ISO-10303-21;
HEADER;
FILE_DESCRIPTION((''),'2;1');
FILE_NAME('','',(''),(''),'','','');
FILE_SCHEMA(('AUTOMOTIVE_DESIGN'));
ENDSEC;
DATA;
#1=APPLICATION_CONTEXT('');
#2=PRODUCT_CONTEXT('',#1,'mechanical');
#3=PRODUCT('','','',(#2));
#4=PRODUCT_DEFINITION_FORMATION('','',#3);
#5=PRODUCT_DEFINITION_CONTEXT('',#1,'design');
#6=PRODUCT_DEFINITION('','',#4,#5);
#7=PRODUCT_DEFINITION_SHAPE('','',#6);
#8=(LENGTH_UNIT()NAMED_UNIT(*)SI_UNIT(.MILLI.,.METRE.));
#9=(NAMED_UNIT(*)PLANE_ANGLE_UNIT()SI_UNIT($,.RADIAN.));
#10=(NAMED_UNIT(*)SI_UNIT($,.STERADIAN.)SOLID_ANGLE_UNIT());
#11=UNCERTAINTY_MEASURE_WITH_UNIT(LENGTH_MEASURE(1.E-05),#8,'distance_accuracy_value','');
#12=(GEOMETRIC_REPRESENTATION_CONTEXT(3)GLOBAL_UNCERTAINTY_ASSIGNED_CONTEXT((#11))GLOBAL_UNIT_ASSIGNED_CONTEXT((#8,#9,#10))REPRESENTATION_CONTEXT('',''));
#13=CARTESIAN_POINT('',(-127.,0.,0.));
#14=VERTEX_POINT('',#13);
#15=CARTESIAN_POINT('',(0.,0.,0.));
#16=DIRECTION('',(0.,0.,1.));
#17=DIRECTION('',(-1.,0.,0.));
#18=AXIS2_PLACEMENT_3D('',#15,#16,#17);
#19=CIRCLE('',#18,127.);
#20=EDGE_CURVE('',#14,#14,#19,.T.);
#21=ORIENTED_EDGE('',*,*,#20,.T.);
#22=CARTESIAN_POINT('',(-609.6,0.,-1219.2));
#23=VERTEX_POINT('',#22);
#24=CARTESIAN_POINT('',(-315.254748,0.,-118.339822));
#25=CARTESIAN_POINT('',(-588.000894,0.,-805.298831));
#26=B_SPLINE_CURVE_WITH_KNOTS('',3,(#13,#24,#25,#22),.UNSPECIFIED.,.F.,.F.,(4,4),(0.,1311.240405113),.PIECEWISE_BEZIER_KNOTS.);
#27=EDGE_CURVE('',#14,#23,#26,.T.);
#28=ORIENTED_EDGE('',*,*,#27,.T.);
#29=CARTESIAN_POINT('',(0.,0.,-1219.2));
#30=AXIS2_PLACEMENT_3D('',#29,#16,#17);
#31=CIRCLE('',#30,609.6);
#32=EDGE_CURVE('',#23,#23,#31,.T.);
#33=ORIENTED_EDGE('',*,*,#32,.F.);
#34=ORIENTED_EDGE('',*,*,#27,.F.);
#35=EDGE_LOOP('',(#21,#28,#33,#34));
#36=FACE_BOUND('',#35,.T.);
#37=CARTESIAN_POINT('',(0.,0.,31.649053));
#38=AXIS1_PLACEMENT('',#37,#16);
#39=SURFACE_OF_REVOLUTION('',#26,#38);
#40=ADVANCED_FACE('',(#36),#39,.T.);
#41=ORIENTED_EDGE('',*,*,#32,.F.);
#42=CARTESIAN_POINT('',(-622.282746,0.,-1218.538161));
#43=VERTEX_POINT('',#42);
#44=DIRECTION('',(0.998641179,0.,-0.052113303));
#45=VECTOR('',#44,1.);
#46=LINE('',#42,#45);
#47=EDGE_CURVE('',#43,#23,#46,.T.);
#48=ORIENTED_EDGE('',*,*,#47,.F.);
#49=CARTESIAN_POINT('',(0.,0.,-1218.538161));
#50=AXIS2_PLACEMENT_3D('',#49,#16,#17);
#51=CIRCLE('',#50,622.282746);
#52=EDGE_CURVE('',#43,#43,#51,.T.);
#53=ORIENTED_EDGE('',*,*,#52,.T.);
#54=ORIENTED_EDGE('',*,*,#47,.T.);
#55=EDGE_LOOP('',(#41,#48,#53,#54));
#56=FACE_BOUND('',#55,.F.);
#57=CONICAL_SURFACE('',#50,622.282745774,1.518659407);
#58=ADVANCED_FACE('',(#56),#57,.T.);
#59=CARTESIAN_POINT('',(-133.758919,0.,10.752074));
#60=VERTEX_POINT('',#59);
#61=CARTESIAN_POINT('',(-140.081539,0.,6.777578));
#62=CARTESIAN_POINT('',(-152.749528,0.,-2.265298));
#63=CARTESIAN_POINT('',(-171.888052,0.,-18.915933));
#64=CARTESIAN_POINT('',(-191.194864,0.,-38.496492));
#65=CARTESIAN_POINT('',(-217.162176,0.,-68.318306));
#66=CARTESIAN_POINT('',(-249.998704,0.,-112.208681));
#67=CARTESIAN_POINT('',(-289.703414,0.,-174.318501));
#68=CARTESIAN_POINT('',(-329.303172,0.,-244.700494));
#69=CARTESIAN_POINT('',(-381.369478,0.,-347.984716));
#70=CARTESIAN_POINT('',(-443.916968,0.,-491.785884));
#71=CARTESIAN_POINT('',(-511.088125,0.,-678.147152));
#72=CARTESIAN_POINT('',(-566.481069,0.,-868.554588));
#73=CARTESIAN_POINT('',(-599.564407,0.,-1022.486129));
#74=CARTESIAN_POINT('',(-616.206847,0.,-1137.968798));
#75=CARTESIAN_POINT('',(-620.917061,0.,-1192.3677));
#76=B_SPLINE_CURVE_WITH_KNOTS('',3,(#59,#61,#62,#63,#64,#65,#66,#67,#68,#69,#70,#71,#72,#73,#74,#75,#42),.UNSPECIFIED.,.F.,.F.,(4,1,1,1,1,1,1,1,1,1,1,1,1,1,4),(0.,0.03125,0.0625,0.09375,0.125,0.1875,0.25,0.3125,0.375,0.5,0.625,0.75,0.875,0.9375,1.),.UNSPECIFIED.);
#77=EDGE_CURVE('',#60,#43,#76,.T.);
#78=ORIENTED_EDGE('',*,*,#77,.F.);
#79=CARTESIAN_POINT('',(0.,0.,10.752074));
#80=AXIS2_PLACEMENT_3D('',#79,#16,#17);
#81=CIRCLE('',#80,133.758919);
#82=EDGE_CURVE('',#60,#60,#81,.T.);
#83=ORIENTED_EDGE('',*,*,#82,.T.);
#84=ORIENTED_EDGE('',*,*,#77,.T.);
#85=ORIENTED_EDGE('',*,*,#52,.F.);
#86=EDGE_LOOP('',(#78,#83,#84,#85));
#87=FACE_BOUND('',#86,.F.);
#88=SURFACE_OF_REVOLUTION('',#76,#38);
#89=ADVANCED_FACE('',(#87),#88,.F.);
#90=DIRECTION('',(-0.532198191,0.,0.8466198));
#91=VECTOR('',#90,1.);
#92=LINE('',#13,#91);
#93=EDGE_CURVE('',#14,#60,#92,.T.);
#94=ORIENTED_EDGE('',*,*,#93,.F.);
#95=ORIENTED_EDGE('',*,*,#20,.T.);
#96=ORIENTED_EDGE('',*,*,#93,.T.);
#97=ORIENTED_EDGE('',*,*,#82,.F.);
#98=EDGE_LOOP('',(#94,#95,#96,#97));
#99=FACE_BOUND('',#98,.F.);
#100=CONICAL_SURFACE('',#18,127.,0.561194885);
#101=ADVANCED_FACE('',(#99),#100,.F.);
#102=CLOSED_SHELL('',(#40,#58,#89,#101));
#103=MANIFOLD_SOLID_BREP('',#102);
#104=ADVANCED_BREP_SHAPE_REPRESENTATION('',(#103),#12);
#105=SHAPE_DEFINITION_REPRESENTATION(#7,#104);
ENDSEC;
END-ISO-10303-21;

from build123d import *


# Not quite as in the source:
# - the dataset's text gives a spline's control points without its knots; the knots are read off the source's solid


with BuildPart() as f1:
    # F0 (on Front) → F1 (revolve)
    with BuildSketch(Plane.XZ):
        with BuildLine():
            add(Edge.make_bspline(
                [(-127, 0), (-315.2547478676, -118.3398216963), (-588.0008935928, -805.2988312721), (-609.6, -1219.2)],
                knots=[0, 0, 0, 0, 1311.2404051127, 1311.2404051127, 1311.2404051127, 1311.2404051127], degree=3))
            Line((-127, 0), (-133.7589185158, 10.7520738396))
            add(Edge.make_bspline(
                [(-133.7589185158, 10.7520738396), (-140.0815385554, 6.7775779152), (-152.7495279098, -2.2652979505), (-171.8880516902, -18.9159329288), (-191.1948637323, -38.4964920529), (-217.1621757773, -68.3183060606), (-249.9987036601, -112.2086807603), (-289.7034139236, -174.3185013134), (-329.3031723399, -244.7004939723), (-381.3694778118, -347.9847159664), (-443.9169681735, -491.7858839202), (-511.0881247, -678.1471518811), (-566.4810687841, -868.5545883371), (-599.5644066691, -1022.4861292856), (-616.2068474289, -1137.9687978702), (-620.9170609117, -1192.3677004267), (-622.2827457739, -1218.5381609036)],
                knots=[0, 0, 0, 0, 0.03125, 0.0625, 0.09375, 0.125, 0.1875, 0.25, 0.3125, 0.375, 0.5, 0.625, 0.75, 0.875, 0.9375, 1, 1, 1, 1], degree=3))
            Line((-622.2827457739, -1218.5381609036), (-609.6, -1219.2))
        make_face()
    revolve(axis=Axis((0, 0, 31.6490530968), (0, 0, 1)))


solid = f1.part
